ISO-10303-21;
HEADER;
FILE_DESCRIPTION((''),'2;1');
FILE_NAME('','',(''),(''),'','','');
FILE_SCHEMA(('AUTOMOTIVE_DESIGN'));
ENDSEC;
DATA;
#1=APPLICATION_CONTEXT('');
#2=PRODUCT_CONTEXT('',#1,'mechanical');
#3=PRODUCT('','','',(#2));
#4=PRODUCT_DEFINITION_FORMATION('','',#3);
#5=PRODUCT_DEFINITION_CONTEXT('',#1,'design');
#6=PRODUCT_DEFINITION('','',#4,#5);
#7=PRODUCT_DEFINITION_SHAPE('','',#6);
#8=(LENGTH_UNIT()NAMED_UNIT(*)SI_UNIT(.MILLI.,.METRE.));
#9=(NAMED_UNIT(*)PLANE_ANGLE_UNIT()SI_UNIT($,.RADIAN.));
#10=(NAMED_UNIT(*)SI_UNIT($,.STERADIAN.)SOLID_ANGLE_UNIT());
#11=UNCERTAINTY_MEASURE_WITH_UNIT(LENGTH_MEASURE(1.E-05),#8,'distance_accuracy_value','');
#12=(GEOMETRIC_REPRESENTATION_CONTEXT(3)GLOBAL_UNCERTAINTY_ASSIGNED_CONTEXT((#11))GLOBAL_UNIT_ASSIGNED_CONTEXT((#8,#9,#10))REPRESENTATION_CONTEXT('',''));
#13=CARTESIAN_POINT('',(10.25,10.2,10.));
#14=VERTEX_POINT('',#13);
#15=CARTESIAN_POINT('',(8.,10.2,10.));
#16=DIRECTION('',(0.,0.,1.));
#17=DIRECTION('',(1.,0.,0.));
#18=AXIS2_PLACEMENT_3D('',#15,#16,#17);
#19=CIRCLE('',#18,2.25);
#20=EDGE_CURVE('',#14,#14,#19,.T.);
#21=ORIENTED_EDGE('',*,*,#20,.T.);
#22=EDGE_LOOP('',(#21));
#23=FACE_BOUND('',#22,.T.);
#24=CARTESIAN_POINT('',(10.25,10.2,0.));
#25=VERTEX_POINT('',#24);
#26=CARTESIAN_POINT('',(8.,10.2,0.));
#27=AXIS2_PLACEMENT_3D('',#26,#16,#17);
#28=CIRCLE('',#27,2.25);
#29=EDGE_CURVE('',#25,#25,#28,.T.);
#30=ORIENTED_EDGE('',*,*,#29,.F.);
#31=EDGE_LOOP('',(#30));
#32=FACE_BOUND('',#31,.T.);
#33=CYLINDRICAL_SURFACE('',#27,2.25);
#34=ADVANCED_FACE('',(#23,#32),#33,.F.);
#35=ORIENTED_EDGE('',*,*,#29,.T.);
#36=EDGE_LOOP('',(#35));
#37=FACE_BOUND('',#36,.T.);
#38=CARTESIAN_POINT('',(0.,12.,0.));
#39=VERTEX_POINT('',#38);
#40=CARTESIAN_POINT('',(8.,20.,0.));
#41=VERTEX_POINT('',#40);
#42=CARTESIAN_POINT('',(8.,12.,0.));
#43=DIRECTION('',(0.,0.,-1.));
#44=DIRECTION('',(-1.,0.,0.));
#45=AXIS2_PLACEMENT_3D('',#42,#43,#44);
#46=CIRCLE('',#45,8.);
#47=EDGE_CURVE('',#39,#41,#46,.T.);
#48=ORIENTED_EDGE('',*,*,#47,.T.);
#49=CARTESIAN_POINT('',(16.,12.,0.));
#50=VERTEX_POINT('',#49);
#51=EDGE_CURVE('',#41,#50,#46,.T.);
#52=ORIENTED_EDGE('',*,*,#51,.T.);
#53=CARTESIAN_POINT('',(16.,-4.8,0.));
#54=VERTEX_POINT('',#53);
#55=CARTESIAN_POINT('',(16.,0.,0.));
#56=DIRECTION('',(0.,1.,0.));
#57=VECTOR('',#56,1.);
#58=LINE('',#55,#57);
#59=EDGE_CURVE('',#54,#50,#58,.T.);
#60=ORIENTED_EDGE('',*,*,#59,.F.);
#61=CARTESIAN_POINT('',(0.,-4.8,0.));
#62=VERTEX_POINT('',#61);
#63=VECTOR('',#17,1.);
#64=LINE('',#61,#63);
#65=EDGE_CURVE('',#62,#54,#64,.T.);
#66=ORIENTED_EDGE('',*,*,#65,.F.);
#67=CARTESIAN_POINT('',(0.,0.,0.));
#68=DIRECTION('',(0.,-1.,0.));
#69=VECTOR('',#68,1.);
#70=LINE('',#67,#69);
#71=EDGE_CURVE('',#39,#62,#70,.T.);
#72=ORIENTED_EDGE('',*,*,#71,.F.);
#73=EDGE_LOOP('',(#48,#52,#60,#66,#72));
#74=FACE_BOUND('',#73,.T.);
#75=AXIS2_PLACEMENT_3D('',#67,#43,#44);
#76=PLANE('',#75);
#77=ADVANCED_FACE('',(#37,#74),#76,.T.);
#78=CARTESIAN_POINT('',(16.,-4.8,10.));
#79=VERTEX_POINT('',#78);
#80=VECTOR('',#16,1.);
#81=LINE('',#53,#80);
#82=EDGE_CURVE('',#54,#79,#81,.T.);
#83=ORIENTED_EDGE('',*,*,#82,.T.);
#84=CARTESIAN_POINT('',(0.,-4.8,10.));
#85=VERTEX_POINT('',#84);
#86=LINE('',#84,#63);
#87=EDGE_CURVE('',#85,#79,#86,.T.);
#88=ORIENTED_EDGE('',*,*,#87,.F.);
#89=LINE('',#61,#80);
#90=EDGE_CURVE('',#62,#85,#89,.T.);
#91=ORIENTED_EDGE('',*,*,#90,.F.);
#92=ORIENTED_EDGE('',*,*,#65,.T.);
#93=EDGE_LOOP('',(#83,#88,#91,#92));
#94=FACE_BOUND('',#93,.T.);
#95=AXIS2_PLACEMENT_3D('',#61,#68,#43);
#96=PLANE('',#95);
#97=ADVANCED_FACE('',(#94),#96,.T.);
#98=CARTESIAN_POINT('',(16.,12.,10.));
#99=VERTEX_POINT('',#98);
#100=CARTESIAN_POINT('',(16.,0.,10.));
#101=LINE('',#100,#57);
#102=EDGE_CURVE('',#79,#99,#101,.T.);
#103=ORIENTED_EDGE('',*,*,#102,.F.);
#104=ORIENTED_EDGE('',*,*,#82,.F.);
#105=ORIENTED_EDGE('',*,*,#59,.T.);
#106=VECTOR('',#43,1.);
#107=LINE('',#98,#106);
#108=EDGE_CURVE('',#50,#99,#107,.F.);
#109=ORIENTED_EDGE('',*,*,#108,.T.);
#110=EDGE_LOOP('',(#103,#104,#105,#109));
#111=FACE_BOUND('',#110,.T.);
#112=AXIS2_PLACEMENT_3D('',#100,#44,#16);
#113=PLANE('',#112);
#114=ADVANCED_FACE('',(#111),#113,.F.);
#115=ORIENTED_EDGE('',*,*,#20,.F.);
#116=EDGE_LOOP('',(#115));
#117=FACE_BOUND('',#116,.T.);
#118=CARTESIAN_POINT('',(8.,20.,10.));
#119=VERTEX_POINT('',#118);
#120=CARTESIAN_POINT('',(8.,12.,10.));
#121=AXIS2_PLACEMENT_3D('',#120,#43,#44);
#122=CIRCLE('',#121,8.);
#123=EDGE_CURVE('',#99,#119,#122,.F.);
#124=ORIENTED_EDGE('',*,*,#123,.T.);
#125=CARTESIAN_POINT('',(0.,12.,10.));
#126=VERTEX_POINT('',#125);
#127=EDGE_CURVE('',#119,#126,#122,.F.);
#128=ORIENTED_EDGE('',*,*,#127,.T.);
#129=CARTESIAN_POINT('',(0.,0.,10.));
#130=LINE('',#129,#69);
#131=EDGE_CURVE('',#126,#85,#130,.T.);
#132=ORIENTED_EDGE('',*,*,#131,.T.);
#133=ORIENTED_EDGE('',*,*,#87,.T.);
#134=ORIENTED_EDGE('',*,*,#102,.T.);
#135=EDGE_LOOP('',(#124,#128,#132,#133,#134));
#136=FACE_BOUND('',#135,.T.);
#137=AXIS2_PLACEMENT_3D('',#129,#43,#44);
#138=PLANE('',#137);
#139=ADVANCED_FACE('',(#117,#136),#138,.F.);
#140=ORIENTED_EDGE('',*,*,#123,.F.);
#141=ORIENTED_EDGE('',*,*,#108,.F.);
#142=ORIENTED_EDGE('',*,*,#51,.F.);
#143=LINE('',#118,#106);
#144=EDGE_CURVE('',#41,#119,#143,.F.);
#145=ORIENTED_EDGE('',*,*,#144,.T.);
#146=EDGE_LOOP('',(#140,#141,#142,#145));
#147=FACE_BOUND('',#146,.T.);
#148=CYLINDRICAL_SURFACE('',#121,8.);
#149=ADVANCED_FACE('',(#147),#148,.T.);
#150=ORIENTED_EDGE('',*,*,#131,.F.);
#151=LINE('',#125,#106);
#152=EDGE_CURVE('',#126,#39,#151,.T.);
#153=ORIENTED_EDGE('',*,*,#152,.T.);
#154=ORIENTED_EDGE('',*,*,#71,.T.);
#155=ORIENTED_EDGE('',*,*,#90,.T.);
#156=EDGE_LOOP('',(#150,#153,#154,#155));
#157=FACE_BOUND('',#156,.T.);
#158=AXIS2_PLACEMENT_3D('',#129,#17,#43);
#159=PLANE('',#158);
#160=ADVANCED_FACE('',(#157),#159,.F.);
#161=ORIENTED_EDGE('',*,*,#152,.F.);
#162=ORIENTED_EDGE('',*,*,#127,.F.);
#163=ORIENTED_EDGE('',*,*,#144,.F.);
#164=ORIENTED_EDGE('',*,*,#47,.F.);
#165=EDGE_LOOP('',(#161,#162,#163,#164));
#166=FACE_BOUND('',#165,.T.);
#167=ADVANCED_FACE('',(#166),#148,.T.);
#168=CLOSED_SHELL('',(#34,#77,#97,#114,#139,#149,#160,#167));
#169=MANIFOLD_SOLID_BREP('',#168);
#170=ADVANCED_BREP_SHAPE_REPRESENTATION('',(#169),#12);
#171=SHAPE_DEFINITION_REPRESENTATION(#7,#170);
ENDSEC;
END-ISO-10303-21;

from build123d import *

# Parameters (mm, degrees)
SKETCH1_W           = 16
SKETCH1_H           = 20
BOSS_EXTRUDE1_DEPTH = 10
SKETCH2_R           = 2.25
CUT_EXTRUDE1_DEPTH  = 28.49545417
FILLET1_R           = 8
SKETCH3_W           = 16
SKETCH3_H           = 4.8
BOSS_EXTRUDE2_DEPTH = 10


with BuildPart() as part:
    # Sketch1 → Boss-Extrude1 (new body)
    with BuildSketch(Plane.XY):
        with Locations((8, 10)):
            Rectangle(SKETCH1_W, SKETCH1_H)
    extrude(amount=BOSS_EXTRUDE1_DEPTH)

    # Sketch2 → Cut-Extrude1 (cut, through all)
    with BuildSketch(Plane.XY.offset(10)):
        with Locations((8, 10.2)):
            Circle(SKETCH2_R)
    extrude(amount=-CUT_EXTRUDE1_DEPTH, mode=Mode.SUBTRACT)

    # Fillet1
    fillet1_edges = [part.edges().sort_by_distance(p)[0] for p in [
        (16, 20, 5),
        (0, 20, 5),
    ]]
    fillet(fillet1_edges, radius=FILLET1_R - 0.0001)  # a hair under: the kernel refuses the full size

    # Sketch3 → Boss-Extrude2 (add)
    with BuildSketch(Plane.XY.offset(10)):
        with Locations((8, -2.4)):
            Rectangle(SKETCH3_W, SKETCH3_H)
    extrude(amount=-BOSS_EXTRUDE2_DEPTH)


solid = part.part
